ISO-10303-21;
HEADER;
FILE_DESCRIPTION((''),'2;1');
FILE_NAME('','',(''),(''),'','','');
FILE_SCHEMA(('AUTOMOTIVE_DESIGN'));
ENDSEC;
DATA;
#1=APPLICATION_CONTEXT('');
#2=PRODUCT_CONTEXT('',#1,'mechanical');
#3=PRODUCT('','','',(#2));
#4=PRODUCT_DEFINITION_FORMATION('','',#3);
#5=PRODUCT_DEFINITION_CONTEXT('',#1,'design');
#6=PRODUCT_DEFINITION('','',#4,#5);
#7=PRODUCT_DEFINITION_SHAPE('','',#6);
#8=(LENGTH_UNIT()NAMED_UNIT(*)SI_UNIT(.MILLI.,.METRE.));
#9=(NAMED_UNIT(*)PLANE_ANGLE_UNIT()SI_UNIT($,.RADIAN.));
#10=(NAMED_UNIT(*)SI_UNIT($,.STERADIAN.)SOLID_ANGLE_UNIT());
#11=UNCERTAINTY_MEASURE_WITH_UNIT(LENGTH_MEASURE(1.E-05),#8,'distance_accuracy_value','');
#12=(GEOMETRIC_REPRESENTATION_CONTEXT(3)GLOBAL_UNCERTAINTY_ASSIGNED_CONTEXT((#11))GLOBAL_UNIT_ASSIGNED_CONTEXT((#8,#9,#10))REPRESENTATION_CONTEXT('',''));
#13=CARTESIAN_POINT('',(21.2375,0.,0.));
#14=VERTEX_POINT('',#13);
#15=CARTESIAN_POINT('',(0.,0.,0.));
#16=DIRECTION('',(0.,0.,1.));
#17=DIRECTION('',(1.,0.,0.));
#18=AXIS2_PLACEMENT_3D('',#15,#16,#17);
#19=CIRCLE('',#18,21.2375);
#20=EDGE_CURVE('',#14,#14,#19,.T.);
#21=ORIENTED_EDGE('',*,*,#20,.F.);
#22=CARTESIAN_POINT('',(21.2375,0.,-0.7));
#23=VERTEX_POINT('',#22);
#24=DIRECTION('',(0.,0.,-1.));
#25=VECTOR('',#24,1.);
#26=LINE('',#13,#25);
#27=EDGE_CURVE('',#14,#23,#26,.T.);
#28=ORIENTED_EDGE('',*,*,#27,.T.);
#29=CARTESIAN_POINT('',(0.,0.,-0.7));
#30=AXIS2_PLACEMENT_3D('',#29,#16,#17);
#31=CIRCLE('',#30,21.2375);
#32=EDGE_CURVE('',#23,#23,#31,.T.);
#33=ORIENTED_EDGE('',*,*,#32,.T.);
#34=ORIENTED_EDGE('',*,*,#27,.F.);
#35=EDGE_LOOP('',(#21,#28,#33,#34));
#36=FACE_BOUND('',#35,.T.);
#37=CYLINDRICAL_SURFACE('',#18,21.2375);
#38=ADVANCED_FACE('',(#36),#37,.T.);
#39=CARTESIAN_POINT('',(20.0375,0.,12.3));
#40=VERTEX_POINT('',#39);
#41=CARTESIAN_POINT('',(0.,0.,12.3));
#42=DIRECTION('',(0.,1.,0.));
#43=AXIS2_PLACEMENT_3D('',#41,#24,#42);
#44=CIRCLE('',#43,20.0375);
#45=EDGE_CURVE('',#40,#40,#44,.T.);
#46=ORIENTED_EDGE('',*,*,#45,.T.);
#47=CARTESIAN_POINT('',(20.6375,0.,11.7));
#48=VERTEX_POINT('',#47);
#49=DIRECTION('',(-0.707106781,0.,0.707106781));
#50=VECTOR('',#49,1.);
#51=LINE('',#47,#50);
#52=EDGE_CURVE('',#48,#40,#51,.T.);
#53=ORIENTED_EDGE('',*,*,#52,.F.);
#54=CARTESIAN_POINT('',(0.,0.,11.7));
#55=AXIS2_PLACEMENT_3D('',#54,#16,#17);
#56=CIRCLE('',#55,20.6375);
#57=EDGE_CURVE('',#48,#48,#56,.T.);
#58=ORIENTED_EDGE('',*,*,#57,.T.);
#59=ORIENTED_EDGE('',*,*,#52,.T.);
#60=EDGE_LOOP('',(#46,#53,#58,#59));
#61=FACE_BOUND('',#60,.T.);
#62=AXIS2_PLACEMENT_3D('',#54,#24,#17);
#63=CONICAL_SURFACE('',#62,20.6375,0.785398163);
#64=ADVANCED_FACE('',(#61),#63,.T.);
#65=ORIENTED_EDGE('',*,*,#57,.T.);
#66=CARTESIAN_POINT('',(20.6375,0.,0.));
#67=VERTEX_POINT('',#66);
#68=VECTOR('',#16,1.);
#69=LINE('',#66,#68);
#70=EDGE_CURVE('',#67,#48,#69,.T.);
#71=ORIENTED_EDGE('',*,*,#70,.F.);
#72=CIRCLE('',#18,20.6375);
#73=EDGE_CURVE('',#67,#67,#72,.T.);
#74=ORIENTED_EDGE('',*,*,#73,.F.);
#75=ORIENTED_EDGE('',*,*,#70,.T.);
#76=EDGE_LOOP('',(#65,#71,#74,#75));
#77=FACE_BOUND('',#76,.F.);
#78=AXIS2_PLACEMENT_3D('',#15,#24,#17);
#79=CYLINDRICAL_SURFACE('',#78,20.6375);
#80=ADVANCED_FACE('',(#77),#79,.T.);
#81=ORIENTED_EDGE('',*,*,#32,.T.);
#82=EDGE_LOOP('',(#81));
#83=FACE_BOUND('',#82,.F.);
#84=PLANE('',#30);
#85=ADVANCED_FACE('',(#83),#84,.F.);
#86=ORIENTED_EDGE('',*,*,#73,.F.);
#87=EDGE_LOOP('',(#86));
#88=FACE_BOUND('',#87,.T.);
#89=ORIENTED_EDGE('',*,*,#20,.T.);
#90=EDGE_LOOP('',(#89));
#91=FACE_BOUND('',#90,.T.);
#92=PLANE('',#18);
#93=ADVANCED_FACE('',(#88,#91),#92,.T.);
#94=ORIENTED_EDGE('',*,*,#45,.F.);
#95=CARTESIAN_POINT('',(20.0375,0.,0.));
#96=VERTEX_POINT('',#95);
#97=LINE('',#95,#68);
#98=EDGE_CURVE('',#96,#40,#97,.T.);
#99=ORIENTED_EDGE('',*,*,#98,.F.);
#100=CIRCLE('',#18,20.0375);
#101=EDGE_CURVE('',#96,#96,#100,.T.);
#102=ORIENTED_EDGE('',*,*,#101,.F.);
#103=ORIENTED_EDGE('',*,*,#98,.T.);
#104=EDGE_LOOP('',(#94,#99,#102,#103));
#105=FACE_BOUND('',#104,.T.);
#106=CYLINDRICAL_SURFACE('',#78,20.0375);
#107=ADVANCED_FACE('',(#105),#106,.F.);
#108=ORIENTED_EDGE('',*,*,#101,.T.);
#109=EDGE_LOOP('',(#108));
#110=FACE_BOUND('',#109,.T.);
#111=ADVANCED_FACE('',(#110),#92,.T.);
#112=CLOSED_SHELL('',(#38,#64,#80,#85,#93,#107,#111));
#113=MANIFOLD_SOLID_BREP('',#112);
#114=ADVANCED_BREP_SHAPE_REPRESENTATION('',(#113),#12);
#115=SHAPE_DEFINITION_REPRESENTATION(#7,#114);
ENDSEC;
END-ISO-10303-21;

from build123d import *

# Parameters (mm, degrees)
F0_R     = 20.6375
F0_R_2   = 20.0375
F1_DEPTH = 12.7
F2_R     = 21.2375
F3_DEPTH = 0.7


# Not quite as in the source:
# - a fillet or chamfer that OpenCascade refuses, or shapes differently, is made with other operations: its cross-section is extruded or revolved along the edge and cut away or added


with BuildPart() as f1:
    # F0 (on Top) → F1 (new body)
    with BuildSketch(Plane.XY):
        Circle(F0_R)
        Circle(F0_R_2, mode=Mode.SUBTRACT)
    extrude(amount=F1_DEPTH)

    # F2 (on Top) → F3 (join)
    with BuildSketch(Plane.XY):
        Circle(F2_R)
    extrude(amount=-F3_DEPTH)

    # F4: chamfer of 1 on 1 edges, made by hand

    # F4_s1 → F4_t2 (revolve, cut)
    with BuildSketch(Plane.XZ):
        Polygon((20.6375, 11.7), (19.6375, 12.7), (20.6375, 12.7), align=None)
    revolve(axis=Axis((0, 0, 12.7), (0, 0, 1)), mode=Mode.SUBTRACT)


solid = f1.part
